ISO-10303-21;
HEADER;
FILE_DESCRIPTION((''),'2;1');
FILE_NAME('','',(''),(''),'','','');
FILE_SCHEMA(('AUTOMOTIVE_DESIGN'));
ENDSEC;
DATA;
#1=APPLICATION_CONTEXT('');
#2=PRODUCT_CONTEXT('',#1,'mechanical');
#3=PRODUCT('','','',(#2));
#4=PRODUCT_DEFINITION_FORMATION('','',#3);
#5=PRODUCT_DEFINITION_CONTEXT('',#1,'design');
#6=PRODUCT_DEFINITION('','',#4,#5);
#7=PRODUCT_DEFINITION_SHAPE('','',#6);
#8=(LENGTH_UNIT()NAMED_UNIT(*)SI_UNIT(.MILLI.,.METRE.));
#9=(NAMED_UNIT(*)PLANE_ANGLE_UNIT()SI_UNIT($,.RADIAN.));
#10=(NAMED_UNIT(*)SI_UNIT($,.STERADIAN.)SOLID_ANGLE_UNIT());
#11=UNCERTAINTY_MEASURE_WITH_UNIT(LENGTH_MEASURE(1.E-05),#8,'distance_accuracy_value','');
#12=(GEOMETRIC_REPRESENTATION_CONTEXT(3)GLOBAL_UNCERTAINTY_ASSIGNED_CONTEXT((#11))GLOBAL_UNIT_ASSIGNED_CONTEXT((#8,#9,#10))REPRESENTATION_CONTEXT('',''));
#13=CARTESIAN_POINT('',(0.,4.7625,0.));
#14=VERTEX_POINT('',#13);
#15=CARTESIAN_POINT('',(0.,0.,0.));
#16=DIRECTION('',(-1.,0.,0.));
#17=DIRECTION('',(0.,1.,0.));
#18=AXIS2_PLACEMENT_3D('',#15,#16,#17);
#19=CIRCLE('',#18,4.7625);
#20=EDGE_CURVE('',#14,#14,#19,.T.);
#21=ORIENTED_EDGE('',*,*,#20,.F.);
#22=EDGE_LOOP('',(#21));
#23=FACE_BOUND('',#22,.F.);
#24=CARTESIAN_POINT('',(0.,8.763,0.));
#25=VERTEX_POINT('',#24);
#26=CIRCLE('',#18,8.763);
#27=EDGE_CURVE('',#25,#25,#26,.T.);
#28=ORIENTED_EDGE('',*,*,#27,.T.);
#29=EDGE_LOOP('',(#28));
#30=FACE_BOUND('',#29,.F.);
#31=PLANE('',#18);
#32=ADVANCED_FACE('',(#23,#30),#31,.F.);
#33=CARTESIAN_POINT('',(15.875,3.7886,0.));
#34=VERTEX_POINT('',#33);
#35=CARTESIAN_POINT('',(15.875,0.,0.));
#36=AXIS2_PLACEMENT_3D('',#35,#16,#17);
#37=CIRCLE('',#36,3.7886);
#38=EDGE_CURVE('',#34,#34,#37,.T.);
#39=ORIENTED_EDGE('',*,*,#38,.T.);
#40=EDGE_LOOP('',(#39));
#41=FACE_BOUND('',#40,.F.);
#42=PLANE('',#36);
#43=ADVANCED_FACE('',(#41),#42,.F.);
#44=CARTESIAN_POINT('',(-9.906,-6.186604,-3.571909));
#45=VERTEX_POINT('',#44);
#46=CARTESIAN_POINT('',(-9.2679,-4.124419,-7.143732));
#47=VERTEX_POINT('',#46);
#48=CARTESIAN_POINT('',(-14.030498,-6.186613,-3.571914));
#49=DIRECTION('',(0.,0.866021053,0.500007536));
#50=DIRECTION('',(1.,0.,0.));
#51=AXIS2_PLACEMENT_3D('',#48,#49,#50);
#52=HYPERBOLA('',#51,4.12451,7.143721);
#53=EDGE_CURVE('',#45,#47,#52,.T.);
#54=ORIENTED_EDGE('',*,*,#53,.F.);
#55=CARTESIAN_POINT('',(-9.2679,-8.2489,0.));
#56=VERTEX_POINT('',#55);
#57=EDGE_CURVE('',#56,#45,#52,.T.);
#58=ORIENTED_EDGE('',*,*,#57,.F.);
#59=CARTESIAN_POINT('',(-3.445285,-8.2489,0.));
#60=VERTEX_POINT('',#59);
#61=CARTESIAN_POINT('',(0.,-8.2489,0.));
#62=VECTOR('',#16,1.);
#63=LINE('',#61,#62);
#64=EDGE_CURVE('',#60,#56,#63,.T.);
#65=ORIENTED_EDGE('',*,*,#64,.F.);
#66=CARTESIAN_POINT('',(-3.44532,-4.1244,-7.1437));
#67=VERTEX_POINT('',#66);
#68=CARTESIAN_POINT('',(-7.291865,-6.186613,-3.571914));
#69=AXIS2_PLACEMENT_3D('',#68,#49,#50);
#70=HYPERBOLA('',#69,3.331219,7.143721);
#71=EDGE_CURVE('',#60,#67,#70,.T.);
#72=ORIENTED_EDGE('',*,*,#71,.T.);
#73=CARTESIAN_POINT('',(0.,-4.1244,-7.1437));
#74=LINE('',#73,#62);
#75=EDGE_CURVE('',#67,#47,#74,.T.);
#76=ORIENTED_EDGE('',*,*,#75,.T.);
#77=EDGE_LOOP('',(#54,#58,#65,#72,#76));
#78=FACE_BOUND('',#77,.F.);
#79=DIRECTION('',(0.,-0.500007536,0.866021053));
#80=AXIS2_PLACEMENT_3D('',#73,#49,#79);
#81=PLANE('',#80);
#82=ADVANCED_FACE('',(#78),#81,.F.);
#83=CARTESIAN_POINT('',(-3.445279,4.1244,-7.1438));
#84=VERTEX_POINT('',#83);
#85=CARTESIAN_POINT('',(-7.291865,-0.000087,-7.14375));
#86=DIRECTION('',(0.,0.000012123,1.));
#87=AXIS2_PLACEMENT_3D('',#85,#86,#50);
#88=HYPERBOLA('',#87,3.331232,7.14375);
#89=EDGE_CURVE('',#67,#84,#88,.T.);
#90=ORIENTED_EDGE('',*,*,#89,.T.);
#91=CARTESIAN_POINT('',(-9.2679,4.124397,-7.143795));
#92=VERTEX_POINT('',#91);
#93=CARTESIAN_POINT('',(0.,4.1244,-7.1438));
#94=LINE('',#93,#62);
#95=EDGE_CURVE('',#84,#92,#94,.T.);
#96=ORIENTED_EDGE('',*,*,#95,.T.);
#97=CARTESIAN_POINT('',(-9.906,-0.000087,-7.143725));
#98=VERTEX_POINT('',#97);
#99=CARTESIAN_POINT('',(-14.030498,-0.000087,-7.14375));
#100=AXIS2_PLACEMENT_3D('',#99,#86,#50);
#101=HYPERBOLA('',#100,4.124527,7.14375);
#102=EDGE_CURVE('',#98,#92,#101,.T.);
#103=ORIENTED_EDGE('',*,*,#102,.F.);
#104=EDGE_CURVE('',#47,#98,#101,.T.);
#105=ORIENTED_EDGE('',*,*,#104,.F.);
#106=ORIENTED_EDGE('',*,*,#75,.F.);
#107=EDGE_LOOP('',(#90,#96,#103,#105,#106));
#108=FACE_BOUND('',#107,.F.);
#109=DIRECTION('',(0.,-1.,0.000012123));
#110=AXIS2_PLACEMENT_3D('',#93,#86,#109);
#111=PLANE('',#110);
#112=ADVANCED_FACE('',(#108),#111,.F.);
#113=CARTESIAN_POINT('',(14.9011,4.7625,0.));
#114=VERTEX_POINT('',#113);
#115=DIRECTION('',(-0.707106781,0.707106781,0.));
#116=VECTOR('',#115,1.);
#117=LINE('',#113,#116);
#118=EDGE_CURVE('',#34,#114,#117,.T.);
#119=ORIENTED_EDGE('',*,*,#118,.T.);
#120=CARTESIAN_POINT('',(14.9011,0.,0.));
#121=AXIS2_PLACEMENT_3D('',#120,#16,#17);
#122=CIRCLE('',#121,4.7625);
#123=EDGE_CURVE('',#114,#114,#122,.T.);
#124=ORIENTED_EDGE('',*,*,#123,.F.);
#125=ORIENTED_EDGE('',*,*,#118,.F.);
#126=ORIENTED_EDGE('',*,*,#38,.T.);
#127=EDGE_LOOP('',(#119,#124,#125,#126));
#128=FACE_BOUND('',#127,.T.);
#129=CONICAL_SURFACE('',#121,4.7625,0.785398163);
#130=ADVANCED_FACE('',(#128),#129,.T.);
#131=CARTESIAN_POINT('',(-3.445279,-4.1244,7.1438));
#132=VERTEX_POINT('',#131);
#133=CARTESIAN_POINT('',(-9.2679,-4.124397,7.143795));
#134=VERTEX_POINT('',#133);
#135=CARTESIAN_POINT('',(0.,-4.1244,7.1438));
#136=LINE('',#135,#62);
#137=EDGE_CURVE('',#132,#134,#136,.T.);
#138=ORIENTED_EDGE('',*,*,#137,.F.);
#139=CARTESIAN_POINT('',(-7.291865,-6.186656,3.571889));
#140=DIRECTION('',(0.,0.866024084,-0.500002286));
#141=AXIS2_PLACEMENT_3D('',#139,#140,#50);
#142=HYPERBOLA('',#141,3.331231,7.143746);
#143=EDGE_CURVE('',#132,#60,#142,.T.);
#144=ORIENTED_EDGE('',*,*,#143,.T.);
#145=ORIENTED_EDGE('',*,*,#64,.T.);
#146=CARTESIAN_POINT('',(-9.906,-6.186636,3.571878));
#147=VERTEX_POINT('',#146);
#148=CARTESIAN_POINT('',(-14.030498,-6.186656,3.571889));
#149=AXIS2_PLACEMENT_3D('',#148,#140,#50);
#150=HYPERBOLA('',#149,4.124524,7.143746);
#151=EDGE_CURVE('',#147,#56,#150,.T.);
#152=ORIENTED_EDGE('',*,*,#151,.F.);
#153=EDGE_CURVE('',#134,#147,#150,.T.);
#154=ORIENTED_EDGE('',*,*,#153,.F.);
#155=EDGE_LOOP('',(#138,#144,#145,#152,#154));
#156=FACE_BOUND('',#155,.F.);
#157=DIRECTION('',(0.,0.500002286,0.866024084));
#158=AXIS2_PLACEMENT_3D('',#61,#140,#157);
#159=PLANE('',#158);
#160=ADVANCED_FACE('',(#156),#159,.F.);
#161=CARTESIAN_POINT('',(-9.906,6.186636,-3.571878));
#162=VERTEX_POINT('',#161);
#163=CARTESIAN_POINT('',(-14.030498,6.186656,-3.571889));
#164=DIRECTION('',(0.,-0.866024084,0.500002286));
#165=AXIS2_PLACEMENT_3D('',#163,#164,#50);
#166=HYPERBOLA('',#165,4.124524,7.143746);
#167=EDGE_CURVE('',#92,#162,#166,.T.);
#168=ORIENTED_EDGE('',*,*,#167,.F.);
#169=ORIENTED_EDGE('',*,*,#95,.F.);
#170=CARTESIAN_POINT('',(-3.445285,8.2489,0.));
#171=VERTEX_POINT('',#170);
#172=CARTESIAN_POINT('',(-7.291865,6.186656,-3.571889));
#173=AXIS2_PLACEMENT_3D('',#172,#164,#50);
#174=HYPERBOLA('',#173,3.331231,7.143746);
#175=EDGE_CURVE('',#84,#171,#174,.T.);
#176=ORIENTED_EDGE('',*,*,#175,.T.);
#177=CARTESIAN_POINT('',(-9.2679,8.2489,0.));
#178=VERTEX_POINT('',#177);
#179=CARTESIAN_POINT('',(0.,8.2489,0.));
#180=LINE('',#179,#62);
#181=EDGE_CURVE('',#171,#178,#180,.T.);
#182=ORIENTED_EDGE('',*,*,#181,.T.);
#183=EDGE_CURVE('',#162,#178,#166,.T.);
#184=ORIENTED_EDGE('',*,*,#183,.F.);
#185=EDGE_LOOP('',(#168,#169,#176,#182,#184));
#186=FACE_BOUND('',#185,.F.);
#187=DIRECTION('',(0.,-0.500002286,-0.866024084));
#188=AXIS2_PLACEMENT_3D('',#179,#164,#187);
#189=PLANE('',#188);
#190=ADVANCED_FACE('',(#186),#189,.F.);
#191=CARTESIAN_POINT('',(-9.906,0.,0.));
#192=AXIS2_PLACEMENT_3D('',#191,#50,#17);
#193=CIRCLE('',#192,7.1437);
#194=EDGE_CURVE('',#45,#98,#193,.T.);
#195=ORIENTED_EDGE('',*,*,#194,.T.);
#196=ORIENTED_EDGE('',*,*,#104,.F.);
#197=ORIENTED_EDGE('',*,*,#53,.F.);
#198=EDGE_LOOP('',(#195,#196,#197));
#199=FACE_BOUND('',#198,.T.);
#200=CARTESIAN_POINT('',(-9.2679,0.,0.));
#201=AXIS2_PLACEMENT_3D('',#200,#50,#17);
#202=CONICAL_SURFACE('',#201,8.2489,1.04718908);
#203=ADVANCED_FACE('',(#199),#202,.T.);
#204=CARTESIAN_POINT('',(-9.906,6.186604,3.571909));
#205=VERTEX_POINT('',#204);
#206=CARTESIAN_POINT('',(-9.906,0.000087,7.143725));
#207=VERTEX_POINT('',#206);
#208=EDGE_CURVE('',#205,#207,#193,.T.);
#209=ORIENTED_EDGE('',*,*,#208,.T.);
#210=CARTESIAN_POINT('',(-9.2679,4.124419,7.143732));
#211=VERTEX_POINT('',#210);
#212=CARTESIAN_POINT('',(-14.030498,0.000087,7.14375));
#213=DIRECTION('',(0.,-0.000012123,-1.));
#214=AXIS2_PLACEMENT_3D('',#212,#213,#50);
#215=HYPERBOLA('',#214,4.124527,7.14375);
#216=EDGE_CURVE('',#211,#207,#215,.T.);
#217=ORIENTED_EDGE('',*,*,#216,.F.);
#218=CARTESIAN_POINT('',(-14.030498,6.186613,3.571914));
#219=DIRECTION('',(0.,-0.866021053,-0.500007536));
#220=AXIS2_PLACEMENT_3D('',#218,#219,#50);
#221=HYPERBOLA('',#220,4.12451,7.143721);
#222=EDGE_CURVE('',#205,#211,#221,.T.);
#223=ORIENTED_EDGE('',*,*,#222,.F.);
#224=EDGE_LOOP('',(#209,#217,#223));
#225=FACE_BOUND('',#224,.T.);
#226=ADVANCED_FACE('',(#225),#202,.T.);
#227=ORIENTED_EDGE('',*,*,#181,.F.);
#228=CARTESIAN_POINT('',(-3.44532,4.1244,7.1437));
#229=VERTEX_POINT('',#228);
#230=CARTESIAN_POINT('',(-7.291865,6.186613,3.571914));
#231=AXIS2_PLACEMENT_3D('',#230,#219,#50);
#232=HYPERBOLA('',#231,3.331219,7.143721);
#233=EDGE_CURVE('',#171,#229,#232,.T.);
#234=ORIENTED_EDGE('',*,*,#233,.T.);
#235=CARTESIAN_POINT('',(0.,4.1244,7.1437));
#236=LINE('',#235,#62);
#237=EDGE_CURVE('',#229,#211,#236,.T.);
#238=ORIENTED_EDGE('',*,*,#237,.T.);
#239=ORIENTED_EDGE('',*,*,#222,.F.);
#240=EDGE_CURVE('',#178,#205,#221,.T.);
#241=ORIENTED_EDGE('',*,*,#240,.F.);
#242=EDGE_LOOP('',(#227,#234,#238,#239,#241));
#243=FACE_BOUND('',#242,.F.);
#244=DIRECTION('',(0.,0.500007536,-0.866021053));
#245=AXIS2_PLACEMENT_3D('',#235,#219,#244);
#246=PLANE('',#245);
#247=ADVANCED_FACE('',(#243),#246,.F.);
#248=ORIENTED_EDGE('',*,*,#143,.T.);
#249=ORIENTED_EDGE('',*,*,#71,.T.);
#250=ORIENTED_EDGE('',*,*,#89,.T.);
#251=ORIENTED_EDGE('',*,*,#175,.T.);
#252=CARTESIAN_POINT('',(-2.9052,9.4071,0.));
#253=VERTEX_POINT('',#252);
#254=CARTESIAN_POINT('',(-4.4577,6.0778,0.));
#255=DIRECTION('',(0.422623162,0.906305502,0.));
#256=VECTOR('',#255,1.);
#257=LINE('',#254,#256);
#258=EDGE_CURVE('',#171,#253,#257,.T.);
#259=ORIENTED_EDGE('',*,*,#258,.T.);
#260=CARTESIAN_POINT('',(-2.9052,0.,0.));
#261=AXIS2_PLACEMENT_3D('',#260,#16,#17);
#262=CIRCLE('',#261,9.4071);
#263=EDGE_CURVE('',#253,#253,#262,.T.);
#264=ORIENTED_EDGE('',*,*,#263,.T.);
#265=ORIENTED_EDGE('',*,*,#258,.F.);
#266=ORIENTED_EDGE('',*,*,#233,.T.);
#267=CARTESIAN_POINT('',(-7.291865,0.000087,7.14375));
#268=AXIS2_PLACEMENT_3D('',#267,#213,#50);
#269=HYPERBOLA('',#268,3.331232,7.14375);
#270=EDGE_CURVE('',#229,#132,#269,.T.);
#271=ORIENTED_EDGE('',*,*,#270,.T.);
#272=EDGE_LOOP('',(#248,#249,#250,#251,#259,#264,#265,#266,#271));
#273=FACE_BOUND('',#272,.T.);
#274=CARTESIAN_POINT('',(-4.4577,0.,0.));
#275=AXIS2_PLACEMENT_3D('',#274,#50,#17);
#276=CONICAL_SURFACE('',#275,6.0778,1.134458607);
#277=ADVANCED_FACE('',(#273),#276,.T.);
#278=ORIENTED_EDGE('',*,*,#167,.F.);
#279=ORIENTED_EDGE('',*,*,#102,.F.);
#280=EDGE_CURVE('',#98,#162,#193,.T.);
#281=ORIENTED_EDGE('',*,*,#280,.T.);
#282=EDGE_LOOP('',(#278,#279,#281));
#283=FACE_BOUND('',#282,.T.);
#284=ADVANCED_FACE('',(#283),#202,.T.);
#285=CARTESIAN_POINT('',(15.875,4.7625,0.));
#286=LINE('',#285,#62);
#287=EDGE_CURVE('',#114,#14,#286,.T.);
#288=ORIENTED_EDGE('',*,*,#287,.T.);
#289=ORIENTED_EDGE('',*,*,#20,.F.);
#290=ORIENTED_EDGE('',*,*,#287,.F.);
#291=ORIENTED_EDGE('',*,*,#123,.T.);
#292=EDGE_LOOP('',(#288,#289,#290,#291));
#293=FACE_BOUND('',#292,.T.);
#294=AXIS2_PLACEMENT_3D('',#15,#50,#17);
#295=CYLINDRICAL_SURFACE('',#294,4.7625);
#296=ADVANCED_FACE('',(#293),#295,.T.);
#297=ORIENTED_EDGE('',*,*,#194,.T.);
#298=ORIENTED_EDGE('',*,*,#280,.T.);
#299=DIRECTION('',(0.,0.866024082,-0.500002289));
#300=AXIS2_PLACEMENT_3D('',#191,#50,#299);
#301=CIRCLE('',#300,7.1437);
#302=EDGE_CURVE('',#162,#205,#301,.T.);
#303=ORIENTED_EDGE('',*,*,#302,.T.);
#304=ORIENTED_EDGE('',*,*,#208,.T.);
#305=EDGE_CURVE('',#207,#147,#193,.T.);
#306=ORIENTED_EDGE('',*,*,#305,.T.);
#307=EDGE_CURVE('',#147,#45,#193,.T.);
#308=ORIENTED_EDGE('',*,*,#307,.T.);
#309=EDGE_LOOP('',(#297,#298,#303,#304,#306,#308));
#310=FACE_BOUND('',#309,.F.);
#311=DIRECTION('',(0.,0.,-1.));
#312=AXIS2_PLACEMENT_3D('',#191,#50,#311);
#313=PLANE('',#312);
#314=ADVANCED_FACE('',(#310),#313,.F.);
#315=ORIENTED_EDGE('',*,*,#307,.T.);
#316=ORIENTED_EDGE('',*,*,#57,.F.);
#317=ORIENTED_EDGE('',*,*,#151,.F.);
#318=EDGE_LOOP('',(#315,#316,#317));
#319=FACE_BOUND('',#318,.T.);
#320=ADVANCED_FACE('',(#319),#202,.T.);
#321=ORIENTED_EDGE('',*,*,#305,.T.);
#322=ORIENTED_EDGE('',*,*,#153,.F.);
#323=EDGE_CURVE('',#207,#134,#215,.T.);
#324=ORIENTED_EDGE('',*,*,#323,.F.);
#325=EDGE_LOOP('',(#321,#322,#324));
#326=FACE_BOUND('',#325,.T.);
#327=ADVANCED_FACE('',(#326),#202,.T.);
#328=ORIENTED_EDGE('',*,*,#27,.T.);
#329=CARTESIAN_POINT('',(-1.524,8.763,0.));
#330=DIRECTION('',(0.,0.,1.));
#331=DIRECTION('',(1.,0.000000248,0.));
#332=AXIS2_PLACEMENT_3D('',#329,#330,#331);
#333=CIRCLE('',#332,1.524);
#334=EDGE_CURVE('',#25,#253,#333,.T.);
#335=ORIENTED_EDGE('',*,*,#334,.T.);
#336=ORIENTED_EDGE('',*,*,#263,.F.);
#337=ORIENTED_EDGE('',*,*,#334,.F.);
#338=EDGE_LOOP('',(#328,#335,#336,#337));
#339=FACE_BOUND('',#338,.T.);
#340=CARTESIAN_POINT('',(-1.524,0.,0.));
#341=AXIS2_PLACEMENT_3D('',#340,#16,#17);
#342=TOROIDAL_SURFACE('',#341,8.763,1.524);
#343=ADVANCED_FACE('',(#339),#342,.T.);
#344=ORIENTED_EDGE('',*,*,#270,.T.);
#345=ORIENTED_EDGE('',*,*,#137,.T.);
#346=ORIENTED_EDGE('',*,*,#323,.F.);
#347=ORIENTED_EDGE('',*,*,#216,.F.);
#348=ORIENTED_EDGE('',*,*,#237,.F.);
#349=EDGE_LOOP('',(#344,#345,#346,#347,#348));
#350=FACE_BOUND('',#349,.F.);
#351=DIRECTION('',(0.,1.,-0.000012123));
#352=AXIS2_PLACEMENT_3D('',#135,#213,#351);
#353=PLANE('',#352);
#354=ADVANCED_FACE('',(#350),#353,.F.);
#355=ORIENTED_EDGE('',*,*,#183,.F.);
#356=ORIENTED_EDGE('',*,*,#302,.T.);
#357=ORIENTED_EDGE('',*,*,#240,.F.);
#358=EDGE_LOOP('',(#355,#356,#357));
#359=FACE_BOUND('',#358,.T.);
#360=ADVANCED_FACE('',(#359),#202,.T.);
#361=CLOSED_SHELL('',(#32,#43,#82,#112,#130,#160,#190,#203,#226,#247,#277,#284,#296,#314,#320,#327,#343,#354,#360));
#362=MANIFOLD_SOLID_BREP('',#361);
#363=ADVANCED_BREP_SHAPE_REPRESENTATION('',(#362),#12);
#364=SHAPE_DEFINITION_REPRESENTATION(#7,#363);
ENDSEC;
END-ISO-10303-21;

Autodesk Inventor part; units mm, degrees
ref_plane "YZ Plane" through (0, 0, 0) normal (1, 0, 0) x (0, 1, 0)
ref_plane "XZ Plane" through (0, 0, 0) normal (0, 1, 0) x (-1, 0, 0)
sketch "Sketch1" plane through (0, 0, 0) normal (0, 0, 1) x (1, 0, 0)
  line L0 (-4.4577, 0) -> (-4.4577, 6.0778)
  line L1 (0, 8.763) -> (0, 4.7625)
  line L2 (2.3876, 4.7625) -> (15.875, 4.7625)
  line L3 (15.875, 4.7625) -> (15.875, 0)
  line L4 (15.875, 0) -> (-4.4577, 0)
  arc A0 (0, 8.763) -> (-2.9052, 9.4071) centre (-1.524, 8.763) ccw
  line L5 (0, -2.1146) -> (0, 12.6875) projected
  line L6 (-8.5242, 0) -> (19.9415, 0) projected
  line L7 (0, 4.7625) -> (0.0001, 4.7625)
  line L8 (0.0001, 4.7625) -> (0.0001, 4.7625)
  line L9 (0.0001, 4.7625) -> (0.7937, 4.7625)
  line L10 (0.7937, 4.7625) -> (2.3876, 4.7625)
  line L11 (-4.4577, 6.0778) -> (-2.9052, 9.4071)
  line L12 (0.0001, 4.7625) -> (2.3876, 4.7625) construction
  line L13 (2.3876, 4.7625) -> (2.3876, 0) construction
  dimension "d0" = 1.524
  dimension "d1" = 15.875
  dimension "d2" = 13.4874
  dimension "d3" = 20.574
  dimension "d4" = 9.525
  dimension "d5" = 4.4577
  dimension "d15" = 9.525
  dimension "d16" = 9.525
  dimension "d17" = 0.0001
  dimension "d18" = 1.5938
  dimension "d19" = 25
revolve "Body" add sketch "Sketch1" angle 360 about axis through (15.875, 0, 0) along (-1, 0, 0)
sketch "Sketch2" plane through (0, 0, 0) normal (1, 0, 0) x (0, 0, -1)
  line L0 (7.1438, 4.1244) -> (7.1437, -4.1244)
  line L1 (7.1437, -4.1244) -> (0, -8.2489)
  line L2 (0, -8.2489) -> (-7.1438, -4.1244)
  line L3 (-7.1438, -4.1244) -> (-7.1437, 4.1244)
  line L4 (-7.1437, 4.1244) -> (0, 8.2489)
  line L5 (0, 8.2489) -> (7.1438, 4.1244)
  point P0 (0, 0)
  point P1 (0, 0)
  dimension "d23" = 14.2875
extrude "Head" add sketch "Sketch2" against normal blind 9.906
sketch "Sketch3" plane through (0, 0, 0) normal (0, 0, 1) x (1, 0, 0)
  line L0 (-9.906, 7.1437) -> (-9.906, 8.2489)
  line L1 (-9.906, 8.2489) -> (-9.2679, 8.2489)
  line L2 (-9.2679, 8.2489) -> (-9.906, 7.1437)
  line L3 (-11.1981, 0) -> (-2.1531, 0) projected
  line L4 (-9.906, 8.2489) -> (-9.906, 4.1244) projected
  line L5 (-3.4453, 8.2489) -> (-9.906, 8.2489) projected
  point P0 (-9.906, 4.1244)
  dimension "d8" = 30
  dimension "d22" = 14.2875
revolve "Chamfer1" cut sketch "Sketch3" angle 360 about axis through (-10, 0, 0) along (1, 0, 0)
thread "Thread" size "3/8-16 UNC" class "2A" standard "ANSI Unified Screw Threads" length 13.4874
chamfer "Chamfer2" distance 0.9739 distance2 0.9739 1 edges at (15.875, -4.7625, 0) measured on face at (15.875, -1.4057, -0.0221)
ref_plane "Work Plane1" through (10.95, 0, 0) normal (0, 0, -1) x (1, 0, 0)
equation "\"d23\" = SW"
equation "\"d6\" = KOH"
equation "\"d10\" = GEL"
equation "\"d13\" = -0.5 * SPD + 0.5 * GD"
equation "\"d14\" = GUL"
equation "\"d0\" = PHH"
equation "\"d1\" = NLG"
equation "\"d2\" = GEL"
equation "\"d3\" = LADI"
equation "\"d4\" = GD"
equation "\"d5\" = 0.45 * KOH"
equation "\"d15\" = SD2"
equation "\"d16\" = BDM"
equation "\"d18\" = GAL"
equation "\"d19\" = KEWI"
equation "\"d8\" = ANG1"
equation "\"d22\" = SW0"
equation "\"NLG\" = 15.875"
equation "\"GD\" = NND"
equation "\"BDM\" = NND"
equation "\"KOH\" = 9.906"
equation "\"GEL\" = 13.4874"
equation "\"LADI\" = 20.574"
equation "\"SW\" = 14.2875"
equation "\"PHH\" = 1.524"
equation "\"SW0\" = SW"
equation "\"SPD\" = 7.5773"
equation "\"SD2\" = NND"
equation "\"SD\" = 0"
equation "\"ANG1\" = 30deg"
equation "\"KEWI\" = 25deg"
equation "\"GAL\" = 1.59385"
equation "\"GUL\" = 0.97385"
equation "\"THREADDIA\" = 9.525"
equation "\"SDH\" = SW"
equation "\"TOA\" = 30deg"
equation "\"NND\" = 9.525"
equation "\"E0\" = 1.155 * SW"
equation "\"GD1\" = 7.5773"
properties part number "92979A336" material "Steel, Mild"
